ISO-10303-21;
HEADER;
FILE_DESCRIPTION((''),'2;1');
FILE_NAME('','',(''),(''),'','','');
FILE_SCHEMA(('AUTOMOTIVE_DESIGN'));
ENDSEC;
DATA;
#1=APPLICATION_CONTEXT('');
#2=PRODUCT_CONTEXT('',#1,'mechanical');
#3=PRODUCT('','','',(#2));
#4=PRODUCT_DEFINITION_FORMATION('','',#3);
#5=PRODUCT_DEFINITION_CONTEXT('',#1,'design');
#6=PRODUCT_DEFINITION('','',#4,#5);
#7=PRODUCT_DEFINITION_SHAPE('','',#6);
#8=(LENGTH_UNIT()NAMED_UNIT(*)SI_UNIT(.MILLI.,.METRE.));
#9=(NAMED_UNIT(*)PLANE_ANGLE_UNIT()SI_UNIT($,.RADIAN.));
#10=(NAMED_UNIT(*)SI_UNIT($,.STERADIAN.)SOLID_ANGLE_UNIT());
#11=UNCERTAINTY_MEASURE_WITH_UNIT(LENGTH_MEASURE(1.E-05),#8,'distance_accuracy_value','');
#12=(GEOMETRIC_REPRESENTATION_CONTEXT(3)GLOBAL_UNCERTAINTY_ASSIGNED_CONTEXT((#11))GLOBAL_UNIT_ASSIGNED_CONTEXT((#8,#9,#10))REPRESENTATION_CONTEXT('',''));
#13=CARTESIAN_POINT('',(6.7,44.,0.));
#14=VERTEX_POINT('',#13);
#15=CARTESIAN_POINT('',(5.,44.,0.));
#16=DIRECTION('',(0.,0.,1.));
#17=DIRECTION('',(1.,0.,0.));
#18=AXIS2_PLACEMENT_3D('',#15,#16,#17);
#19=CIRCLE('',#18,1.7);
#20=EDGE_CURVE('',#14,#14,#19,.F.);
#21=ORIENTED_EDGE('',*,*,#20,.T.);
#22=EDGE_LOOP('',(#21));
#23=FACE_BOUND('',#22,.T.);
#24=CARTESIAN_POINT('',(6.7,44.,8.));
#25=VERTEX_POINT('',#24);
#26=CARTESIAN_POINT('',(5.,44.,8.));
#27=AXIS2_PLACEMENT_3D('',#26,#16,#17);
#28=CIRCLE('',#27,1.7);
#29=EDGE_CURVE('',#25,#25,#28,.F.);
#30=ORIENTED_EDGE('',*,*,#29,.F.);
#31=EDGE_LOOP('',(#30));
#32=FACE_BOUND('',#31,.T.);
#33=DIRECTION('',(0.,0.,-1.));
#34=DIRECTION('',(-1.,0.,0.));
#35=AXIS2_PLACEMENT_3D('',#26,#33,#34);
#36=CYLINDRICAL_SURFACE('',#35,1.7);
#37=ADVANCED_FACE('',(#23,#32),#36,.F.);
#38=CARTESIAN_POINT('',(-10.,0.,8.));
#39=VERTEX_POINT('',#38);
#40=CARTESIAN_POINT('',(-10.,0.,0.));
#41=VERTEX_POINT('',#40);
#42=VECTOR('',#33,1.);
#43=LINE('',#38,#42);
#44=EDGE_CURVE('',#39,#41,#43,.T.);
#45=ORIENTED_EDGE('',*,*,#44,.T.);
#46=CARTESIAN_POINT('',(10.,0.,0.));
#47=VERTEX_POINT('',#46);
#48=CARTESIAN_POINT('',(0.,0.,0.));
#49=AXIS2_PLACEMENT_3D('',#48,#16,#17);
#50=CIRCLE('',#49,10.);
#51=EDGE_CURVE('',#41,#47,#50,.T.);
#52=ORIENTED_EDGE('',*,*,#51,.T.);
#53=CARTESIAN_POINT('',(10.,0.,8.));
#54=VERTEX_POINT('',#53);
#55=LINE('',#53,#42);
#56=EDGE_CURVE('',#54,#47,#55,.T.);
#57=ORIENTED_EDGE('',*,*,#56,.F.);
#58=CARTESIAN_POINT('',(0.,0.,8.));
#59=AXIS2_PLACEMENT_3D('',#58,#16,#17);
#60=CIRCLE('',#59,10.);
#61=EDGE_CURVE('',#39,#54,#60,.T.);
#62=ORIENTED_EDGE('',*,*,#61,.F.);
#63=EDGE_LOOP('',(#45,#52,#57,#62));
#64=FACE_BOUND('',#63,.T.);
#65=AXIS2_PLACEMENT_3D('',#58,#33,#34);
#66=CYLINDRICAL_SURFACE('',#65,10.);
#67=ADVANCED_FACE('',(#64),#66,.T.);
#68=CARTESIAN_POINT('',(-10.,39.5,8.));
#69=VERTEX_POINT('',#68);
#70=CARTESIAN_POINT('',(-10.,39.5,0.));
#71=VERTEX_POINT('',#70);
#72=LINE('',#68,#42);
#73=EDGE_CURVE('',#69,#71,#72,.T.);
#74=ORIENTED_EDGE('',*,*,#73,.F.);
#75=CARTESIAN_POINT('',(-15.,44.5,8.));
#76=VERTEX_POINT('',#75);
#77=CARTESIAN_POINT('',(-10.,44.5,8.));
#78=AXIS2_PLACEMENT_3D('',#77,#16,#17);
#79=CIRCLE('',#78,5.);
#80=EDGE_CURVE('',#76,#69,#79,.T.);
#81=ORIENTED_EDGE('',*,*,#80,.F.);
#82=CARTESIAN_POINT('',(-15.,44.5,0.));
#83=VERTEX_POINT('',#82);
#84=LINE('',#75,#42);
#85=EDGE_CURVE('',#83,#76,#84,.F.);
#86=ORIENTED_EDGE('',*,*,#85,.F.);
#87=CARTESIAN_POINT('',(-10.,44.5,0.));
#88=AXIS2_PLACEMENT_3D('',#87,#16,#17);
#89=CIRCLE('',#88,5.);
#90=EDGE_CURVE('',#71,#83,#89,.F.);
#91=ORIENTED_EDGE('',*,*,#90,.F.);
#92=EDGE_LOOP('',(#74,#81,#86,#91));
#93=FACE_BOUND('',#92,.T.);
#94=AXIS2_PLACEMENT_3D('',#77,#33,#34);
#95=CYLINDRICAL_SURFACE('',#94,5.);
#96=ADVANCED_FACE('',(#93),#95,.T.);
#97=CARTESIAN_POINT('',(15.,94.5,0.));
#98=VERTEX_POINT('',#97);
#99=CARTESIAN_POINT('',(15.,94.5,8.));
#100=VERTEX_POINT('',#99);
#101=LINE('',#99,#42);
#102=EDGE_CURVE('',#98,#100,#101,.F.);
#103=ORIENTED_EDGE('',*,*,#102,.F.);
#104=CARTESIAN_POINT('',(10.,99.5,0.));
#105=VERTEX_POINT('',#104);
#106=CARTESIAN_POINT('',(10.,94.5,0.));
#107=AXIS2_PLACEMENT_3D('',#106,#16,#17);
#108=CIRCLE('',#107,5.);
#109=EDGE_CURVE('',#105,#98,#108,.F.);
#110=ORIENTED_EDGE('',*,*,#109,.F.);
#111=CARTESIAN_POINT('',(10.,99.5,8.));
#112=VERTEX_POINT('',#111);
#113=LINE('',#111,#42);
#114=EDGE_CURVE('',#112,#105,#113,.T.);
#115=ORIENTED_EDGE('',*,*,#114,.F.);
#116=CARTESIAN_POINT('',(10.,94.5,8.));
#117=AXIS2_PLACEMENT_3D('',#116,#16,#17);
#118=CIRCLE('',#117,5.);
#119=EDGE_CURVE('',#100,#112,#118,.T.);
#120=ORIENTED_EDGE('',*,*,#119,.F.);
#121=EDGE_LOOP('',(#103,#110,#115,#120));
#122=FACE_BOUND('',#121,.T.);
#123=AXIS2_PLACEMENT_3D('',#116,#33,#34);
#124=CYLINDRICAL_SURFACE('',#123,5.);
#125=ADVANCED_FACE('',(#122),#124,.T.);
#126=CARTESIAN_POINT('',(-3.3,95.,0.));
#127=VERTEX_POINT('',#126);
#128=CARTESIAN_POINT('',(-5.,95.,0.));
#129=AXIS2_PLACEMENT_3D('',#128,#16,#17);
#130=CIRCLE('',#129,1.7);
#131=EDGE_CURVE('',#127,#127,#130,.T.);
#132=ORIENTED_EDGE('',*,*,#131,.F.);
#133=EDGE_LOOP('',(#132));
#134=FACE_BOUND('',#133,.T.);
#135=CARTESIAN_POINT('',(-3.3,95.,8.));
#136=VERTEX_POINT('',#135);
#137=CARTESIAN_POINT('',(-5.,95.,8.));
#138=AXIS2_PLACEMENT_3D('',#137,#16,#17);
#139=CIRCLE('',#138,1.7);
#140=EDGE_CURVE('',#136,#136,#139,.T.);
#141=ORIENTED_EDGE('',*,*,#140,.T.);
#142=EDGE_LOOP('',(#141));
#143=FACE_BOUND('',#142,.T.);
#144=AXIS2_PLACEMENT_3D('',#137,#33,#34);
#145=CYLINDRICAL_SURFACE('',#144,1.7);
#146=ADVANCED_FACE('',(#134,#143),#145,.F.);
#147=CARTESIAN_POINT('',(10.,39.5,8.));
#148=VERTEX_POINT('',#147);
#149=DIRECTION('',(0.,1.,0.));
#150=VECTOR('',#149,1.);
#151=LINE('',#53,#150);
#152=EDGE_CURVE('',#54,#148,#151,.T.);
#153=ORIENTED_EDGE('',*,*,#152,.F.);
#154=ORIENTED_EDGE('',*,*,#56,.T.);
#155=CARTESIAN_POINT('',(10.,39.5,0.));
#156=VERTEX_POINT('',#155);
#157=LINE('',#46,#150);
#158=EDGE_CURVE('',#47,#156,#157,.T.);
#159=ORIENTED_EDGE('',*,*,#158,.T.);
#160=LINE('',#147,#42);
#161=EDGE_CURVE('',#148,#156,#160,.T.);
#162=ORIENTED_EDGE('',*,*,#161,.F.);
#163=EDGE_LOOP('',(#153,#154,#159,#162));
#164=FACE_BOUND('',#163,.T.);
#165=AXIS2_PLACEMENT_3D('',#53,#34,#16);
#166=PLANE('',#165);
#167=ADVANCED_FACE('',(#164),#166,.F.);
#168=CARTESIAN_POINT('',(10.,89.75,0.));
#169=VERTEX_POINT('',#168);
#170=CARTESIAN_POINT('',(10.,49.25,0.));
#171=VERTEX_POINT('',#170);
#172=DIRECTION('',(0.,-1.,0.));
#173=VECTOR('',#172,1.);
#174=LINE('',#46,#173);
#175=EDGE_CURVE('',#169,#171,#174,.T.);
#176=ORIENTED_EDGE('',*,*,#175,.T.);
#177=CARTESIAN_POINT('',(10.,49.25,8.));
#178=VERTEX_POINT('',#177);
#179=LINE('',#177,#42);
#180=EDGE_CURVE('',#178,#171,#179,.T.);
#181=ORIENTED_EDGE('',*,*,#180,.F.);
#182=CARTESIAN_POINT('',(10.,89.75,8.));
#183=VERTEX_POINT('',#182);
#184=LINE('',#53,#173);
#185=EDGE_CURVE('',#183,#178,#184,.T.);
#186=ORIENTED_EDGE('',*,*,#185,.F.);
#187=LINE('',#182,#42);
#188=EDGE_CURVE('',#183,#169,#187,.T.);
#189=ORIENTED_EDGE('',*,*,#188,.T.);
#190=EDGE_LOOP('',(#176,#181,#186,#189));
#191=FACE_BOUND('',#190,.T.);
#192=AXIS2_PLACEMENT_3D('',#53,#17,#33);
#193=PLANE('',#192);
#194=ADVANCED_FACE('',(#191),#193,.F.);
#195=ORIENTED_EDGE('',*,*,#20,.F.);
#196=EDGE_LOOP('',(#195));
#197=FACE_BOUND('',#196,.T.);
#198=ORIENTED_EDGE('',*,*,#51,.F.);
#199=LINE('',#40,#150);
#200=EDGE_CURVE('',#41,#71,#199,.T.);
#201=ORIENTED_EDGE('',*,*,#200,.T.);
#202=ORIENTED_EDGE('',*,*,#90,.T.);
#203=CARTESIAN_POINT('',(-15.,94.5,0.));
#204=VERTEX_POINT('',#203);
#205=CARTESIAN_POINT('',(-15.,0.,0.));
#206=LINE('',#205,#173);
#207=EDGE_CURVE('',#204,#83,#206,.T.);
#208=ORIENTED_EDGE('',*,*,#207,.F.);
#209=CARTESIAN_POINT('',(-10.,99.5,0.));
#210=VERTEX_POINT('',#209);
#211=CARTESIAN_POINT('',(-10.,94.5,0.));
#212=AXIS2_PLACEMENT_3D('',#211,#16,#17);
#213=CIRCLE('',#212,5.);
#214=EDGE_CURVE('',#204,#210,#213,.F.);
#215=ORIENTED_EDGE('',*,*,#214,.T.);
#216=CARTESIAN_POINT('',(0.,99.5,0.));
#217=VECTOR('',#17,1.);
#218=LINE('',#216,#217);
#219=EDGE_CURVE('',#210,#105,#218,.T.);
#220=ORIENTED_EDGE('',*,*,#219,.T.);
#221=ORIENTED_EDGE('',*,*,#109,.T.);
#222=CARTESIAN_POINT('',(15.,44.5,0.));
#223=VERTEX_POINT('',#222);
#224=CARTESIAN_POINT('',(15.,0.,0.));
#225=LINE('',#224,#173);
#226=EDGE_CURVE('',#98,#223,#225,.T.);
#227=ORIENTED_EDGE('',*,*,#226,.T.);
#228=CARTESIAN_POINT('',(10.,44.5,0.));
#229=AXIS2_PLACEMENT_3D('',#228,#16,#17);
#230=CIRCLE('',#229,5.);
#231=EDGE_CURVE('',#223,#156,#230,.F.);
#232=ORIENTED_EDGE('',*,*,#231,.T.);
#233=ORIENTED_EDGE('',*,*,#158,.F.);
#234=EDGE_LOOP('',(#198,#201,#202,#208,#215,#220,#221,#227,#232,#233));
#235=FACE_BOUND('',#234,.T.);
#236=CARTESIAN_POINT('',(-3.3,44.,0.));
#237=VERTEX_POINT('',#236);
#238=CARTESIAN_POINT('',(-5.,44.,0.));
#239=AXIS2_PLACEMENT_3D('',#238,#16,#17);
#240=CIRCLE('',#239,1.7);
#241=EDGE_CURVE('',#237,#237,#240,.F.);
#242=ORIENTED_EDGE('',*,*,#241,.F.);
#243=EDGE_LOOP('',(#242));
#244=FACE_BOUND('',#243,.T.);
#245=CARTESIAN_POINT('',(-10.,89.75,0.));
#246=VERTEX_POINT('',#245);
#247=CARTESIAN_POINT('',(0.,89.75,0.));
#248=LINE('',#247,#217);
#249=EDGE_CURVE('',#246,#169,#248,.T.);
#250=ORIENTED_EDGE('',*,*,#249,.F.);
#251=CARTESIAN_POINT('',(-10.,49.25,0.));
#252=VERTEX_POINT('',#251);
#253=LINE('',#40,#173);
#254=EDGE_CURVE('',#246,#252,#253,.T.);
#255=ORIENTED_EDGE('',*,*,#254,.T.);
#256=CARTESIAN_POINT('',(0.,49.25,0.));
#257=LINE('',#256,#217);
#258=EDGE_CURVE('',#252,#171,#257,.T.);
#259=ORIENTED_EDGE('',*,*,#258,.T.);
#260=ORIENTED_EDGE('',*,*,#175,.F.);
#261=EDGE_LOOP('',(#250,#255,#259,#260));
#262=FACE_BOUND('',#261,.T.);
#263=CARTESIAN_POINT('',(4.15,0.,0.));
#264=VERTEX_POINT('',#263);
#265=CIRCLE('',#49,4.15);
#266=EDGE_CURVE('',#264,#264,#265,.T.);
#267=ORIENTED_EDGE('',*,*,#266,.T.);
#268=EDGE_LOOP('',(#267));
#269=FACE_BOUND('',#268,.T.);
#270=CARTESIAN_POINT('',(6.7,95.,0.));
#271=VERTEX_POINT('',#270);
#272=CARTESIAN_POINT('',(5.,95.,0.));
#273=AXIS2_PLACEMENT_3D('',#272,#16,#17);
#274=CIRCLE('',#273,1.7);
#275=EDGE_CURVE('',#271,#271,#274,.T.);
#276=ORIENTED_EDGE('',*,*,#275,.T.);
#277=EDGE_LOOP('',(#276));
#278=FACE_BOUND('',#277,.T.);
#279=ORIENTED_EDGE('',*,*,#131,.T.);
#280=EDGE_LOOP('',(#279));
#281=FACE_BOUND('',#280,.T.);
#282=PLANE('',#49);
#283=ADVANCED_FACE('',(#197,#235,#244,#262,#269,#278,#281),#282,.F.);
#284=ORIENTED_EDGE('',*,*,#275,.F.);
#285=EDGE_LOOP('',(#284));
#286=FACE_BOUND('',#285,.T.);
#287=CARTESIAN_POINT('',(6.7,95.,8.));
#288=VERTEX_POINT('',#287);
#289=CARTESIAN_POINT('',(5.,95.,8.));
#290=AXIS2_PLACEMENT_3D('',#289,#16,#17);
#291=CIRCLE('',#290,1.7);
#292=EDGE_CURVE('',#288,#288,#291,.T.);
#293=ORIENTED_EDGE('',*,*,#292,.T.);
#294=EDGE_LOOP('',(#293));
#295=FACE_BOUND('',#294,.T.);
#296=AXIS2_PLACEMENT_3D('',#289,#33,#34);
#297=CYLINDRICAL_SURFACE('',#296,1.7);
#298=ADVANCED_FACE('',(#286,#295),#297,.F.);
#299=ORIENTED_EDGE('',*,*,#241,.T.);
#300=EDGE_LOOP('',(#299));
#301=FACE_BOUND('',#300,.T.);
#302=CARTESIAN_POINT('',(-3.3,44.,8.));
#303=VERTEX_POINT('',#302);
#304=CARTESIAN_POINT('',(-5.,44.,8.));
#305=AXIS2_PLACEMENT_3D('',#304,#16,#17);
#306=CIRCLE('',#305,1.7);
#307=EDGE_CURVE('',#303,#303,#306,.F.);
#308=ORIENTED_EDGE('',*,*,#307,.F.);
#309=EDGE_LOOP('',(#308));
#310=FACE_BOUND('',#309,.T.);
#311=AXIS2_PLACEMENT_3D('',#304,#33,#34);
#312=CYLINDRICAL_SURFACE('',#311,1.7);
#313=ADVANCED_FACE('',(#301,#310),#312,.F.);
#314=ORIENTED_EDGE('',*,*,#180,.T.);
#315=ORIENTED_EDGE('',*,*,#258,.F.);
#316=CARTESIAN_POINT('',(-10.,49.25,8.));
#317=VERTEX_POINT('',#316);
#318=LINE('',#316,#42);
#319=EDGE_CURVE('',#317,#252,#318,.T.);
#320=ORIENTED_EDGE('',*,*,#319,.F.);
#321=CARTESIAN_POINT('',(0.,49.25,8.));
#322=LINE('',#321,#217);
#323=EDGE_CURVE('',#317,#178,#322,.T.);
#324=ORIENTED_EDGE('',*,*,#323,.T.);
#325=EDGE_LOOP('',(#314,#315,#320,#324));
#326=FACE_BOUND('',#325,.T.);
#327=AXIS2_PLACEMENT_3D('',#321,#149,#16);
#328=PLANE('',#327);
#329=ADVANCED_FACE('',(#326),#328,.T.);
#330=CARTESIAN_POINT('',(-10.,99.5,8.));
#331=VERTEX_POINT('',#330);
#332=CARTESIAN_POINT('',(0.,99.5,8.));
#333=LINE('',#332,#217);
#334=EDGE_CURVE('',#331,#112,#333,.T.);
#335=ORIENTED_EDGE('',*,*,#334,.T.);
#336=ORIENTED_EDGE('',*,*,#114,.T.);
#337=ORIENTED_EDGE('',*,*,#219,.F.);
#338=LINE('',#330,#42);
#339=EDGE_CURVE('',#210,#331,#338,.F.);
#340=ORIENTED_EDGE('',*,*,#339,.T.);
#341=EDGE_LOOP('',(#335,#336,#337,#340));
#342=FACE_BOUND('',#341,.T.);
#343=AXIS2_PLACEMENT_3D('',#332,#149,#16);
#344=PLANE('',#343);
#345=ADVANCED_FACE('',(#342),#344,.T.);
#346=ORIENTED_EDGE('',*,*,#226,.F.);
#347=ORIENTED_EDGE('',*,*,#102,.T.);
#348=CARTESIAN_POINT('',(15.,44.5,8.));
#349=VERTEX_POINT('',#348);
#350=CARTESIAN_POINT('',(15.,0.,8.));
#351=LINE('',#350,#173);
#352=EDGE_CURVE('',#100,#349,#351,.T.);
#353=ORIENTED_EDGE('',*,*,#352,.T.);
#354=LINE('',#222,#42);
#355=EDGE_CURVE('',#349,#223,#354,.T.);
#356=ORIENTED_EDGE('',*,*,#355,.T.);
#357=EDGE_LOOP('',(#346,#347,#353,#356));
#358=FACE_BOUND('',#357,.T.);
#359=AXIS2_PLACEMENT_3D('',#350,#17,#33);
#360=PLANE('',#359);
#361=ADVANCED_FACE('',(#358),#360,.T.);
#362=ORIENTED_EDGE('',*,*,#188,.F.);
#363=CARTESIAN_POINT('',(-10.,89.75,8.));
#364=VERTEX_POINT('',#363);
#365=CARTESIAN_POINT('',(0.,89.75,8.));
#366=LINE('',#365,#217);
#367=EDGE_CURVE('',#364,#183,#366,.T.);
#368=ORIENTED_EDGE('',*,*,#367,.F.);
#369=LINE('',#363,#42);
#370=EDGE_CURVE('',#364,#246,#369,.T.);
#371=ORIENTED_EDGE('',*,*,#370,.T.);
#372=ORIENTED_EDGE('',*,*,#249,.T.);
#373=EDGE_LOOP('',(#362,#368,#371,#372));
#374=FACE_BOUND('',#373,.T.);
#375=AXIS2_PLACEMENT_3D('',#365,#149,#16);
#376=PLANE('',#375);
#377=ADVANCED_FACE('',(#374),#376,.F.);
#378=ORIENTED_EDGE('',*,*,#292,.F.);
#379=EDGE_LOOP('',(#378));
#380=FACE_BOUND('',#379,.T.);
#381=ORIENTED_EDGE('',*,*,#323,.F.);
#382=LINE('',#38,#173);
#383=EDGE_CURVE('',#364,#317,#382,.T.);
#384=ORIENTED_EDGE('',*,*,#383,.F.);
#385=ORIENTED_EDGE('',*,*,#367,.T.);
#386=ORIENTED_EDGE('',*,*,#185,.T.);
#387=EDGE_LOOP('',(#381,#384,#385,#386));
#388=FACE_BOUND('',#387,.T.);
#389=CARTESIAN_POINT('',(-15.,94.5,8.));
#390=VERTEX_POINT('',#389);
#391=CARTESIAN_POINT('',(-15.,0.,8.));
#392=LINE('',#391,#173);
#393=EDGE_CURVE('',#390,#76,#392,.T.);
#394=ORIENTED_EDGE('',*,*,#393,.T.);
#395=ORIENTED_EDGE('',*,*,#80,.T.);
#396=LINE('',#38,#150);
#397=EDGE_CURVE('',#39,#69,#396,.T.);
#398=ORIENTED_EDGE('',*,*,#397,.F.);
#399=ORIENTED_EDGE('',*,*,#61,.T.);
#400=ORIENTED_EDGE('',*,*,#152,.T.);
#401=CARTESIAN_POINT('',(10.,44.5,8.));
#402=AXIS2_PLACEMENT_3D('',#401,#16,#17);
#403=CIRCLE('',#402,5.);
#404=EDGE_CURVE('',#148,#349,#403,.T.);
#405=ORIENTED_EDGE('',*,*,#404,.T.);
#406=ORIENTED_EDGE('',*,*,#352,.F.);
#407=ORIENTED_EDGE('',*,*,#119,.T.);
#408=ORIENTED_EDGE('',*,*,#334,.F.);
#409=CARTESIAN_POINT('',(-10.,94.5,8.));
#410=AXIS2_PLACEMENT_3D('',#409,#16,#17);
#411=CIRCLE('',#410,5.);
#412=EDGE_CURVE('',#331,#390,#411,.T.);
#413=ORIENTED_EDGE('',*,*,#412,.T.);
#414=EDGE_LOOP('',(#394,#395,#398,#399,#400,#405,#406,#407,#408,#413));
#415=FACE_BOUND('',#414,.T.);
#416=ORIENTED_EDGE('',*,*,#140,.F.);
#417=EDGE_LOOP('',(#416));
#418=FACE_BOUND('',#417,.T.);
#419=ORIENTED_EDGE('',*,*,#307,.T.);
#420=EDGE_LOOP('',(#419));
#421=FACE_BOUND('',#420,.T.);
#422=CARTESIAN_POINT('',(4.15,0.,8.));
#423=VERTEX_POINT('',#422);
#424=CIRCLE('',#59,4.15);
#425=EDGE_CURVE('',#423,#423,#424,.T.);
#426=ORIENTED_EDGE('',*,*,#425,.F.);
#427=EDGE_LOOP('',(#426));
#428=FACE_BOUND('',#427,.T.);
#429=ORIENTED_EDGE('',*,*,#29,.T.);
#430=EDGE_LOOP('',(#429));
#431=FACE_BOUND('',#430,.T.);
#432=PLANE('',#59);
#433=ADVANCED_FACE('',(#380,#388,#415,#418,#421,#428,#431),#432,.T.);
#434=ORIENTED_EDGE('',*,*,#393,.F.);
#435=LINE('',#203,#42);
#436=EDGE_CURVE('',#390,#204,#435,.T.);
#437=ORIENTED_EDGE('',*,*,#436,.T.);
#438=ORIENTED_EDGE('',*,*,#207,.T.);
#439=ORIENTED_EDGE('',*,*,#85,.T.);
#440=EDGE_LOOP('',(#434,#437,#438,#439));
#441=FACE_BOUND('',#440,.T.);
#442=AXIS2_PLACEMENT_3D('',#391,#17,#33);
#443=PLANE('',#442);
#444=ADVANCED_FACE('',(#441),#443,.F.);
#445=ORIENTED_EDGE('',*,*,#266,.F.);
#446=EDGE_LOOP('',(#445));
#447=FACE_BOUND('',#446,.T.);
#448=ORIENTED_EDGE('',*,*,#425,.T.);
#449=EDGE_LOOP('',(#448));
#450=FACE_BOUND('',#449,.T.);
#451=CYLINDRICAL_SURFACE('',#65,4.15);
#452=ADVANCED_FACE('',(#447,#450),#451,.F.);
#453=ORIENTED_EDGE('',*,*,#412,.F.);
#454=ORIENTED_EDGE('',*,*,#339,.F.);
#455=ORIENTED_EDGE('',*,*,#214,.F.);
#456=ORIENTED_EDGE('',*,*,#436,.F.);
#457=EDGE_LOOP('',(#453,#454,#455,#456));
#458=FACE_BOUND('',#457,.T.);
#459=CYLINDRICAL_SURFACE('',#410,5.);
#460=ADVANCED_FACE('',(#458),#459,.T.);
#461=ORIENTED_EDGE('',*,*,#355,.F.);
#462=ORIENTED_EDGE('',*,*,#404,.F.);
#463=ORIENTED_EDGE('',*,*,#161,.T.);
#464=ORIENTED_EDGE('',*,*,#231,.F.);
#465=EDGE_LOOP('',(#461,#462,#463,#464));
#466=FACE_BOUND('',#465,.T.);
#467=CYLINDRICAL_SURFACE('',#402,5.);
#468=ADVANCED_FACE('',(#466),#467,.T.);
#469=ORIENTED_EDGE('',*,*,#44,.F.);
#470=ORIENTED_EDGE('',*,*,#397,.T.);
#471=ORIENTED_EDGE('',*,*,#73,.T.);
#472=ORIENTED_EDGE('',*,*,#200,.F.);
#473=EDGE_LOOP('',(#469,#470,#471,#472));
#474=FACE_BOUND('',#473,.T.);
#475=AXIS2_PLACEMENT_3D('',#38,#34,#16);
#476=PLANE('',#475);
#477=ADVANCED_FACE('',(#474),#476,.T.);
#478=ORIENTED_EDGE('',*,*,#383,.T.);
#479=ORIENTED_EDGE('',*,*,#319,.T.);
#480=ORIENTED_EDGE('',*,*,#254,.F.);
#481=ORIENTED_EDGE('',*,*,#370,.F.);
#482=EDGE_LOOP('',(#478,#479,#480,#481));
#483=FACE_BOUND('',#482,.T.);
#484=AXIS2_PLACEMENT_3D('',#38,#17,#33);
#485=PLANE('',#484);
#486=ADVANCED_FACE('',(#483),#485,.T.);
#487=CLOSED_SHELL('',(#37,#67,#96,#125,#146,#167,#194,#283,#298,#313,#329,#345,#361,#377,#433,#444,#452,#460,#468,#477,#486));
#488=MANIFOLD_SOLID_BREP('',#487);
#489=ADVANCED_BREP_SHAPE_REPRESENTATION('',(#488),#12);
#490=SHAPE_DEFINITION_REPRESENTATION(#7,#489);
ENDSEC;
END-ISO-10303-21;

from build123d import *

# Parameters (mm, degrees)
SKETCH_1_W      = 30
SKETCH_1_H      = 60
SKETCH_1_R      = 1.7
SKETCH_1_W_2    = 20
SKETCH_1_H_2    = 40.5
SKETCH_1_R_2    = 10
SKETCH_1_R_3    = 4.15
EXTRUDE_1_DEPTH = 8
FILLET_1_R      = 5


with BuildPart() as part:
    # Эскиз1 → Бобышка-Вытянуть1 (new body)
    # profile 1 of 3: a face of its own
    with BuildSketch(Plane.XY):
        with Locations((0, 69.5)):
            Rectangle(SKETCH_1_W, SKETCH_1_H)
        with Locations((-5, 44)):
            Circle(SKETCH_1_R, mode=Mode.SUBTRACT)
        with Locations((5, 95)):
            Circle(SKETCH_1_R, mode=Mode.SUBTRACT)
        with Locations((-5, 95)):
            Circle(SKETCH_1_R, mode=Mode.SUBTRACT)
        with Locations((5, 44)):
            Circle(SKETCH_1_R, mode=Mode.SUBTRACT)
        with Locations((0, 69.5)):
            Rectangle(SKETCH_1_W_2, SKETCH_1_H_2, mode=Mode.SUBTRACT)
    # profile 2 of 3: a face of its own
    with BuildSketch(Plane.XY):
        Circle(SKETCH_1_R_2)
        Circle(SKETCH_1_R_3, mode=Mode.SUBTRACT)
    # profile 3 of 3: a face of its own
    with BuildSketch(Plane.XY):
        with BuildLine():
            Line((-10, 39.5), (-10, 0))
            ThreePointArc((-10, 0), (0, 10), (10, 0))
            Line((10, 0), (10, 39.5))
            Line((10, 39.5), (-10, 39.5))
        make_face()
    extrude(amount=EXTRUDE_1_DEPTH)

    # Скругление1
    fillet_1_edges = [part.edges().sort_by_distance(p)[0] for p in [
        (15, 39.5, 4),
        (-15, 39.5, 4),
        (-15, 99.5, 4),
        (15, 99.5, 4),
    ]]
    fillet(fillet_1_edges, radius=FILLET_1_R - 0.0001)  # a hair under: the kernel refuses the full size


solid = part.part
